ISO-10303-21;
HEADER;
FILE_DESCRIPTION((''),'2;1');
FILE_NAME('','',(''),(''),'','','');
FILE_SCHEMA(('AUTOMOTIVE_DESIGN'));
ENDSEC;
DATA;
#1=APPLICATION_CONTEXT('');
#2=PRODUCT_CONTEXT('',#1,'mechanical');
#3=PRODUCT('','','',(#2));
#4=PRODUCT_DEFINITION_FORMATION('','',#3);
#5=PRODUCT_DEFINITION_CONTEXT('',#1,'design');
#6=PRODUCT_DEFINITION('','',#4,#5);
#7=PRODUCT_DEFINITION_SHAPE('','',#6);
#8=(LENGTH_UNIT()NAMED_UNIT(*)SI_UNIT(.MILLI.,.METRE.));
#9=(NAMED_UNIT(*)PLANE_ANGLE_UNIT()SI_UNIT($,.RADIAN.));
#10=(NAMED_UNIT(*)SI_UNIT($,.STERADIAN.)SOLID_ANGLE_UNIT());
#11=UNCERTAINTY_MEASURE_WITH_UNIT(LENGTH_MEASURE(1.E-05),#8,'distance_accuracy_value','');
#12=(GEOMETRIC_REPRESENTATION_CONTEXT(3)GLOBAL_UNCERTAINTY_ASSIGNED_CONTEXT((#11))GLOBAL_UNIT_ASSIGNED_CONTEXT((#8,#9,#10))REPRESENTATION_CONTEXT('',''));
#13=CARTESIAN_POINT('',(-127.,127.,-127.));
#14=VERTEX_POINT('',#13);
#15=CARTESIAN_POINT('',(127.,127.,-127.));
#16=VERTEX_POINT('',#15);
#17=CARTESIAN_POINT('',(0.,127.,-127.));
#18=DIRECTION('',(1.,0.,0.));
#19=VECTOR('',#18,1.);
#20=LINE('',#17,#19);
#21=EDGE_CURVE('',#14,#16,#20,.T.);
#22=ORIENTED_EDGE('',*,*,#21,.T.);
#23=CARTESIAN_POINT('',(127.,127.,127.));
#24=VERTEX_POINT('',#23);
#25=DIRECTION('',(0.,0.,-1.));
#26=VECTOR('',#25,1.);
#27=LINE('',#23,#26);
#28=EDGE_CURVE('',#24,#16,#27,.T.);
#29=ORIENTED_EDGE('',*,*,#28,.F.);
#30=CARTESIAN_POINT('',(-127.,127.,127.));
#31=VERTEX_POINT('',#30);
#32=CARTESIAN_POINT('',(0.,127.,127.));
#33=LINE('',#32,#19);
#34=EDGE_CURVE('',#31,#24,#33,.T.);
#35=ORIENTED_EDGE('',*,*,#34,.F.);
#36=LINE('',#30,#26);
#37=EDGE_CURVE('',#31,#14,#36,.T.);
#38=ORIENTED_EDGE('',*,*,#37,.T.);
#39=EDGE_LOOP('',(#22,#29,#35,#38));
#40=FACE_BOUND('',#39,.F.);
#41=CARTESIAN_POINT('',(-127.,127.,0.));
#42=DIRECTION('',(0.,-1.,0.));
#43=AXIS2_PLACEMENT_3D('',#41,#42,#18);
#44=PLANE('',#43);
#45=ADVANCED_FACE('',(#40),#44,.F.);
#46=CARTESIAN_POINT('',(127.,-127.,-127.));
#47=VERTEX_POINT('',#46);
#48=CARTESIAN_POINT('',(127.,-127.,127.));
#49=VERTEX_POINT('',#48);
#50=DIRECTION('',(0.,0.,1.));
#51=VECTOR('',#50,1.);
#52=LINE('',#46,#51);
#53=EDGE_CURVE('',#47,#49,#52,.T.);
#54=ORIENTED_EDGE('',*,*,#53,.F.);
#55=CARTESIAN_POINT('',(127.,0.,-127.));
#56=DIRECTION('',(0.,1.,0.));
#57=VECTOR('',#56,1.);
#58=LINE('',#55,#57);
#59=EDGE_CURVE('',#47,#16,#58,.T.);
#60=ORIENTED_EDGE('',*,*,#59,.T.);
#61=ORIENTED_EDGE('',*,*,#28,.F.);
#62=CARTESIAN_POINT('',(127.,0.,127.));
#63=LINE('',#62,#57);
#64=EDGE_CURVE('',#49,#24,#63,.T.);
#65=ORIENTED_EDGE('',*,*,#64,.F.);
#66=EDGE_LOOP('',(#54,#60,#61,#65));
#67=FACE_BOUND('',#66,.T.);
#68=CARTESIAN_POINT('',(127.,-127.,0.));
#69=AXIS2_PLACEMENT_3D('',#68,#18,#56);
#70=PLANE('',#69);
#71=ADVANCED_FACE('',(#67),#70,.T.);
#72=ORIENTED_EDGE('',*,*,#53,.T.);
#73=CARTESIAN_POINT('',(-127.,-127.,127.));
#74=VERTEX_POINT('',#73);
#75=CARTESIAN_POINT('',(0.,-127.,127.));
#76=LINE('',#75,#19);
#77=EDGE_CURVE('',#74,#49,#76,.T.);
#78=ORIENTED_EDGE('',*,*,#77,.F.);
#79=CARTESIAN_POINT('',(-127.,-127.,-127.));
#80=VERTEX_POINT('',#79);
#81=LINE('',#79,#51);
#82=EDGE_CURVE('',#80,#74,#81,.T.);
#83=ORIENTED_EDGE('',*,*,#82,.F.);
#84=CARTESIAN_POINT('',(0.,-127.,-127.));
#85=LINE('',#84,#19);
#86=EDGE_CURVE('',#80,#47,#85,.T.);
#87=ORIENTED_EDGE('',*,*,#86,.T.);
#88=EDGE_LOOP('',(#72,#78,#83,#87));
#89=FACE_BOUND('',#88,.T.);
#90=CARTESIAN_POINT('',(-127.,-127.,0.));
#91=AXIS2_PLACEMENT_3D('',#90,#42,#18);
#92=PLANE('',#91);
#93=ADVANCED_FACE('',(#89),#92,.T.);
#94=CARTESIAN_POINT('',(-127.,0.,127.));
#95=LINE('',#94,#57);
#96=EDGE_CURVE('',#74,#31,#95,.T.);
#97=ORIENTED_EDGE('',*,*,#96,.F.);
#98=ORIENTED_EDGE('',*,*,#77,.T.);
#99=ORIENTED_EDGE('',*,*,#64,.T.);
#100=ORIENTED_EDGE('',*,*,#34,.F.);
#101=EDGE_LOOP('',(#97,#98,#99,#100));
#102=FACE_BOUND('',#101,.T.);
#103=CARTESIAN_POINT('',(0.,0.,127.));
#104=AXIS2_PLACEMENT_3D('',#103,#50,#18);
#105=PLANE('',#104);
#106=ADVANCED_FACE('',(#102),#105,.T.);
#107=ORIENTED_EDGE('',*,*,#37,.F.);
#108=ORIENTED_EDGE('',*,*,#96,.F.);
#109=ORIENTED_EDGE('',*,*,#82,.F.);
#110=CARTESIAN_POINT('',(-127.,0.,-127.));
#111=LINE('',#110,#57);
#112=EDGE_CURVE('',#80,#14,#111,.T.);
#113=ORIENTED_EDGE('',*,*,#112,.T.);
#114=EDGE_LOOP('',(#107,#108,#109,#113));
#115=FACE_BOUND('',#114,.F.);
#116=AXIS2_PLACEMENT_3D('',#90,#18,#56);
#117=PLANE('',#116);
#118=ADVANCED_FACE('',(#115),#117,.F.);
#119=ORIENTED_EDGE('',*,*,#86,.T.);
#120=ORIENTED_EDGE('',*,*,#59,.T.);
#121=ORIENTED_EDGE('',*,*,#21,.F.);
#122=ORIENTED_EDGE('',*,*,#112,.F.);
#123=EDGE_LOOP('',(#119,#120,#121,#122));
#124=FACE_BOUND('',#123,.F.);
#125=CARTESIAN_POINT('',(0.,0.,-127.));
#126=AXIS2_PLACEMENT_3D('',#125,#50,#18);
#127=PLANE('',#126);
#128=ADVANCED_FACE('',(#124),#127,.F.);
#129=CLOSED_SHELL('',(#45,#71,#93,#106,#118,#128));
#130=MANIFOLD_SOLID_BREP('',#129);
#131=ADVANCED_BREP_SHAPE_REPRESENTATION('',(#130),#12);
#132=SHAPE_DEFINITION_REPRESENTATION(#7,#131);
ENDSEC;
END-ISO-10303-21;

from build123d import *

# Parameters (mm, degrees)
F1_W     = 254
F1_H     = 254
F2_DEPTH = 127


# Not quite as in the source:
# - a variable given as a bare number and used for a length is read in inches; the dataset says mm whatever the document's units were


with BuildPart() as f2:
    # F1 (on Top) → F2 (new body, symmetric)
    with BuildSketch(Plane.XY):
        Rectangle(F1_W, F1_H)
    extrude(amount=F2_DEPTH, both=True)


solid = f2.part
